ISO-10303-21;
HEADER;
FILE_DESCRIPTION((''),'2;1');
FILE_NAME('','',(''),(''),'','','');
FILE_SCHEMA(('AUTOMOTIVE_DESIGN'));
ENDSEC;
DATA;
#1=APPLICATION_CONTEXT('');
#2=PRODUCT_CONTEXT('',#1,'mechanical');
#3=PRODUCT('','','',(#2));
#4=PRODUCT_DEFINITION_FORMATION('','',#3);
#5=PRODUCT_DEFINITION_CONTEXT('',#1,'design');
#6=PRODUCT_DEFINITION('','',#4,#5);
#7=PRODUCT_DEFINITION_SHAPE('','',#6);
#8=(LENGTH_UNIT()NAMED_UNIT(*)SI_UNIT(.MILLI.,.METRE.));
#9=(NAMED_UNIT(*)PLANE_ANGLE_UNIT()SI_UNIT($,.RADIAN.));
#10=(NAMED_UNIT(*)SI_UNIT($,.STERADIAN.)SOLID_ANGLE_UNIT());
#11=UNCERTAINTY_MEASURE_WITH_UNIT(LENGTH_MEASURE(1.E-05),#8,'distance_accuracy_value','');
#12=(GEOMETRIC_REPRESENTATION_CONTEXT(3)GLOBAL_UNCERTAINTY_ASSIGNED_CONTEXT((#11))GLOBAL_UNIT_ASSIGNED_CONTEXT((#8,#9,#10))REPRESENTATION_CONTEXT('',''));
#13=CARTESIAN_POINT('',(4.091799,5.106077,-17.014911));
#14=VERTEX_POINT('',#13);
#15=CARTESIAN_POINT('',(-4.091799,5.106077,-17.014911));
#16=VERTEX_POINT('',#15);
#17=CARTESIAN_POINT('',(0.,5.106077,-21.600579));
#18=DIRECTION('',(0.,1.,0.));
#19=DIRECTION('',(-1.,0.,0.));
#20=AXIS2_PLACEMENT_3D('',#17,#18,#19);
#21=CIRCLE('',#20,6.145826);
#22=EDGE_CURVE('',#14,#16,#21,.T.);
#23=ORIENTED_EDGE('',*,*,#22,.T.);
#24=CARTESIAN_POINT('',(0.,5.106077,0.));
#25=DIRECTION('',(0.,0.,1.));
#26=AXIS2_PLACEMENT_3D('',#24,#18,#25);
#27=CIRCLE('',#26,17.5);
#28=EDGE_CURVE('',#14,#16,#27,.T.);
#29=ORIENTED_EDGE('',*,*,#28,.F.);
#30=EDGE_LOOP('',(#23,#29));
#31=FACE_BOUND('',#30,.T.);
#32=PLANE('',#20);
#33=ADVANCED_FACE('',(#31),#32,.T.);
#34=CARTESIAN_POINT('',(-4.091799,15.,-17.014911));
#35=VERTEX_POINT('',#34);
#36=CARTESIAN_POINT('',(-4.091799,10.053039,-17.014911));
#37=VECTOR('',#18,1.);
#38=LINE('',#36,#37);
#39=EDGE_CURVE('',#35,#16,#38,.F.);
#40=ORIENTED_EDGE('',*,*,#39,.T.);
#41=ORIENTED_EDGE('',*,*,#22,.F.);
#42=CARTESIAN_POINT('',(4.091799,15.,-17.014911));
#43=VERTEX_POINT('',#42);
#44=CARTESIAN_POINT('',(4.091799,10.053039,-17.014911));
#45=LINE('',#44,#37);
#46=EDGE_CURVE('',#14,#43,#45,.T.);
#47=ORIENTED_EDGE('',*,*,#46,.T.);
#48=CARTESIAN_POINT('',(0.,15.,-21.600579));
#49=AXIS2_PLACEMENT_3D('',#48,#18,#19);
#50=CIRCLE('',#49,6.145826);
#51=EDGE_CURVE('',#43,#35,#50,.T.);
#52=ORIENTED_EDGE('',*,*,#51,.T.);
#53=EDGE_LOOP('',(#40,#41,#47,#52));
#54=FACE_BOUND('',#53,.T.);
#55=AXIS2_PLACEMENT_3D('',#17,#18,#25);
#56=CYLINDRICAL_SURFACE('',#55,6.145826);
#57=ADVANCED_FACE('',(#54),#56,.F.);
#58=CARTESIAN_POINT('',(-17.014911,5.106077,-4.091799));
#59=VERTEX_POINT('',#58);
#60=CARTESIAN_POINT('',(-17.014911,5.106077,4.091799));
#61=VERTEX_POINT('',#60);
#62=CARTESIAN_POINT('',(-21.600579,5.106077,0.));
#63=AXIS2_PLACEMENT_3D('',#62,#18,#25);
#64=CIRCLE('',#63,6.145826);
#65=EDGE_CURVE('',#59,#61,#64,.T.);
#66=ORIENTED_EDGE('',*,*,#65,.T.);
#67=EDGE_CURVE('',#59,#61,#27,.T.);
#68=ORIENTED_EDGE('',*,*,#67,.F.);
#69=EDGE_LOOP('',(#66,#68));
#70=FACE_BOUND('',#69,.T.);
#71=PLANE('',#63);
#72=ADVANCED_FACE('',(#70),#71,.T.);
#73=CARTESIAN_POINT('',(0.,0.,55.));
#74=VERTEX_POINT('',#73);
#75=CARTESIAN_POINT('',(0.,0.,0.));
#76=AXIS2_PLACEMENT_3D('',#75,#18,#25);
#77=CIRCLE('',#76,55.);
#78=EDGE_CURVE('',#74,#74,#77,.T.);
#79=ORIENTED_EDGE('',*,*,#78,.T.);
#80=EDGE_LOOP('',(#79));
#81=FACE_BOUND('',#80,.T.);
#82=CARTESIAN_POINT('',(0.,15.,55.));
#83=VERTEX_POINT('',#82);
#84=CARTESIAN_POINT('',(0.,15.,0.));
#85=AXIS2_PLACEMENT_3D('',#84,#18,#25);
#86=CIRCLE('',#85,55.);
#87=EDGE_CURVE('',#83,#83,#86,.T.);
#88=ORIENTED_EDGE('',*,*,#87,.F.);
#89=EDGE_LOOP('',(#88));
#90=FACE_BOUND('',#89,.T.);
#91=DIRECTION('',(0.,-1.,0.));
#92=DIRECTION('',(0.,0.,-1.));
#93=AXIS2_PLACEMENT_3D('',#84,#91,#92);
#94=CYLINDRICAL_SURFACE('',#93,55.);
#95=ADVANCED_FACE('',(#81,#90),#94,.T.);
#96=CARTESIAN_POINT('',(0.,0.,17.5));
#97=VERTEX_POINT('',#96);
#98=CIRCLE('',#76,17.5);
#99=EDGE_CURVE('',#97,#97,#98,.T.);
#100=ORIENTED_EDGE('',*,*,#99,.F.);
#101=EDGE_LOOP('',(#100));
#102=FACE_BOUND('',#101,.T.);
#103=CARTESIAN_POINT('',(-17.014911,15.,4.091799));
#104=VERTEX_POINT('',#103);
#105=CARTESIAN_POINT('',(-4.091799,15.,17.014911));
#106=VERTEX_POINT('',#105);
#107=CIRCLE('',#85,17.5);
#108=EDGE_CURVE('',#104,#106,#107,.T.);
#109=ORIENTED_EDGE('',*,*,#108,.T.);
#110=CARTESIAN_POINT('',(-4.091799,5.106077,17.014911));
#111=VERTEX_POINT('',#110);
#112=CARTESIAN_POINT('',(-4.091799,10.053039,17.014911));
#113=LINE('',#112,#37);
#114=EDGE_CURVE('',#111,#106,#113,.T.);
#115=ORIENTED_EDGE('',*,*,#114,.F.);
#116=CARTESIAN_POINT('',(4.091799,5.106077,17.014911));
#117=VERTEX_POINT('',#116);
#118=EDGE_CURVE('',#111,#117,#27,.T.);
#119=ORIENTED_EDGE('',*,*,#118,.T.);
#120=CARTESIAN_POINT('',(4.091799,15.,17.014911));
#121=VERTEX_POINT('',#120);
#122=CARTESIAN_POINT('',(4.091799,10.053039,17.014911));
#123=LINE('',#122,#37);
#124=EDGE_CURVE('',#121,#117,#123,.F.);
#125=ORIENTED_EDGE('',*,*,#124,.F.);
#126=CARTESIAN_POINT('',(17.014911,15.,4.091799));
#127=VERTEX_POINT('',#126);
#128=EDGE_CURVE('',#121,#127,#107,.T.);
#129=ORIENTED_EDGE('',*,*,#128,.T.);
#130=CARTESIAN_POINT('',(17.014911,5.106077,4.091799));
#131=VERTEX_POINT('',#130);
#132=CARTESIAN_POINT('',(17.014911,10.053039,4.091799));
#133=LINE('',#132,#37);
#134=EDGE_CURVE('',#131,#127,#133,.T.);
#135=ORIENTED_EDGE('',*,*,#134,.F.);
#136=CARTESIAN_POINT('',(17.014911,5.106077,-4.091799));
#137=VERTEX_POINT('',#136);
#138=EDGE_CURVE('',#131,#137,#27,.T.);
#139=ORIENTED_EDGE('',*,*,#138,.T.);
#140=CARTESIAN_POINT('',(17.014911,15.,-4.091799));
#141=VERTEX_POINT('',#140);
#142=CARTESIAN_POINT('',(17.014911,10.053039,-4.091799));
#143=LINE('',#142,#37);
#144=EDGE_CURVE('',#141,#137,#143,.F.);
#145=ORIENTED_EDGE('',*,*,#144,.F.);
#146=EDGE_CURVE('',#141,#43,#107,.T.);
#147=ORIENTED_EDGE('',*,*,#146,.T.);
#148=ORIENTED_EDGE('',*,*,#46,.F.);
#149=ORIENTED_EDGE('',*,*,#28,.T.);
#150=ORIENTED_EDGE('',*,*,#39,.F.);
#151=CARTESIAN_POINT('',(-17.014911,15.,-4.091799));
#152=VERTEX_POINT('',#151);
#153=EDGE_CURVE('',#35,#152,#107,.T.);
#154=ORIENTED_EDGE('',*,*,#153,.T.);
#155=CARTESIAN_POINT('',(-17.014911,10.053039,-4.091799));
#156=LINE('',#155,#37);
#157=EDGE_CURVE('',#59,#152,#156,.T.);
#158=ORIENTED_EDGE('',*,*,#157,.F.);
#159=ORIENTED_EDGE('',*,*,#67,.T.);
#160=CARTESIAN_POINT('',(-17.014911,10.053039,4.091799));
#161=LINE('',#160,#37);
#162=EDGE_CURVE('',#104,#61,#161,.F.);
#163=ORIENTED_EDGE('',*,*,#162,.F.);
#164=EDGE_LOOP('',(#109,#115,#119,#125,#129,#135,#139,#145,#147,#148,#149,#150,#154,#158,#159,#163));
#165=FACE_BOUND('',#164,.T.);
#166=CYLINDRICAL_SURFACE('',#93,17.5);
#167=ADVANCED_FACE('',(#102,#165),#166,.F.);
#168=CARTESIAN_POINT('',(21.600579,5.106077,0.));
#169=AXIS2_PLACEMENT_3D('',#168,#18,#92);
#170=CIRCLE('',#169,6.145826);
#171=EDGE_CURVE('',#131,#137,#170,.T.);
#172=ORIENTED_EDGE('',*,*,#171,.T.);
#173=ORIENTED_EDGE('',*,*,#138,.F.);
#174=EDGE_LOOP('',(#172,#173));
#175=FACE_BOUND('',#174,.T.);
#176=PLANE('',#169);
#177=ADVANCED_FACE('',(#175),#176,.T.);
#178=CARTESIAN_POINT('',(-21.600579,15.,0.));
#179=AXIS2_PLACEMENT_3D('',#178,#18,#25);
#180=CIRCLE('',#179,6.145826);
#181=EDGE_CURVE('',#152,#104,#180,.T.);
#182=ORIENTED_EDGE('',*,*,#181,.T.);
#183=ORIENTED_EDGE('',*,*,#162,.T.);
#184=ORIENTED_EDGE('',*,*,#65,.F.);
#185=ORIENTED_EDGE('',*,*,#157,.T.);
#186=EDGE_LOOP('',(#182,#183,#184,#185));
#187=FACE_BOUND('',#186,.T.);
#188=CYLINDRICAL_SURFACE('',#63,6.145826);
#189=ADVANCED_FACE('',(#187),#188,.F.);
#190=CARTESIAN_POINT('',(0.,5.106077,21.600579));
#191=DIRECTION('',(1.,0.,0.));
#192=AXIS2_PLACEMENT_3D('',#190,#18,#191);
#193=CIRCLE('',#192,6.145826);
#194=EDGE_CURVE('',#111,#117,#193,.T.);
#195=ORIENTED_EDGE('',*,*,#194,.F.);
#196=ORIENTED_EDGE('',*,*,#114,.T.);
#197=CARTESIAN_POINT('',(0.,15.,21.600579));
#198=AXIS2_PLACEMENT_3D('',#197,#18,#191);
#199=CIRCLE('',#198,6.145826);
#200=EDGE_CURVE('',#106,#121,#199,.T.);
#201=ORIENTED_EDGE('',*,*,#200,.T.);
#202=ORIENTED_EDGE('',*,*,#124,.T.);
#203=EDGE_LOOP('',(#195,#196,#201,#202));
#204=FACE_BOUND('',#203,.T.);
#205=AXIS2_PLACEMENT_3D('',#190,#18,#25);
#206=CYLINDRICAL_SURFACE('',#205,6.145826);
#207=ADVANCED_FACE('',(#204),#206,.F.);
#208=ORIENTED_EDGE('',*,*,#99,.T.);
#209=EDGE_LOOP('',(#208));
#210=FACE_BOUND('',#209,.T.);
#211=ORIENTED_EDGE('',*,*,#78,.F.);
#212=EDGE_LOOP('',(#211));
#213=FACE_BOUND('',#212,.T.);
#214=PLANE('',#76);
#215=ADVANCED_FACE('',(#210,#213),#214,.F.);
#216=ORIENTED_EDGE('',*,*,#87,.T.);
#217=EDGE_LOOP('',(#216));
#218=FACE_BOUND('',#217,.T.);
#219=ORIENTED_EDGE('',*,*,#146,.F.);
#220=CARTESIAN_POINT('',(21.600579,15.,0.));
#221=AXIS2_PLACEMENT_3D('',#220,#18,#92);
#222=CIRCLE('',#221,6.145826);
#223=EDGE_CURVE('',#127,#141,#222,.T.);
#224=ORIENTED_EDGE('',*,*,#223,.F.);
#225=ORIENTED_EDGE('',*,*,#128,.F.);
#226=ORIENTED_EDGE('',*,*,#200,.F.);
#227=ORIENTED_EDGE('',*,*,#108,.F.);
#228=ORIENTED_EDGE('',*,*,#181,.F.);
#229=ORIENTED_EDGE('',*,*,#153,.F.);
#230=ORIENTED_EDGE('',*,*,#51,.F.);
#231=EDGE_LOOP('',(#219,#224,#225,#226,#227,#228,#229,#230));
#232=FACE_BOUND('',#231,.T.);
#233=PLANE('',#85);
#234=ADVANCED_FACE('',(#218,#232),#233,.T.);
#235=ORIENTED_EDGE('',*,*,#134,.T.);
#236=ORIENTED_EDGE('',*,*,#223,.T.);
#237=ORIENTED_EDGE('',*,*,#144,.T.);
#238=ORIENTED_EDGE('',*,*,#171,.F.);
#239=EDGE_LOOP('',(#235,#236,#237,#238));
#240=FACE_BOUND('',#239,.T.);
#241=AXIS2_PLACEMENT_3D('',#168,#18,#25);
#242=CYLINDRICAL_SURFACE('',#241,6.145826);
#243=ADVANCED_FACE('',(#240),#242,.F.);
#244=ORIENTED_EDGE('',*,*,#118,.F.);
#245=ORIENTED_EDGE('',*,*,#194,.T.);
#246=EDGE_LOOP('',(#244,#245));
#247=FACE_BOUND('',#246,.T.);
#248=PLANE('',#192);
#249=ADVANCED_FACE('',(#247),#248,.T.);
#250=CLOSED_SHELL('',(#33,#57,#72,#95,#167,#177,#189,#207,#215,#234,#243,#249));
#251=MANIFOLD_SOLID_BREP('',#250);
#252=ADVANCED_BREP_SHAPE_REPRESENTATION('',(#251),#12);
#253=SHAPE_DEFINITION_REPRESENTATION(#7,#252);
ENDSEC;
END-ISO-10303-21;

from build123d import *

# Parameters (mm, degrees)
SKETCH1_R           = 55
BOSS_EXTRUDE1_DEPTH = 15
SKETCH2_R           = 17.5
CUT_EXTRUDE1_DEPTH  = 80.214897589
SKETCH3_R           = 6.14582619
CUT_EXTRUDE2_DEPTH  = 9.893922801
CIRPATTERN1_COUNT   = 4


with BuildPart() as part:
    # Sketch1 → Boss-Extrude1 (new body)
    with BuildSketch(Plane(origin=(0, 0, 0), x_dir=(1, 0, 0), z_dir=(0, 1, 0))):
        Circle(SKETCH1_R)
    extrude(amount=BOSS_EXTRUDE1_DEPTH)

    # Sketch2 → Cut-Extrude1 (cut, through all)
    with BuildSketch(Plane(origin=(0, 0, 0), x_dir=(1, 0, 0), z_dir=(0, 1, 0))):
        Circle(SKETCH2_R)
    extrude(amount=CUT_EXTRUDE1_DEPTH, mode=Mode.SUBTRACT)

    # Sketch3 → Cut-Extrude2 (cut)
    with BuildSketch(Plane(origin=(0, 15, 0), x_dir=(1, 0, 0), z_dir=(0, 1, 0))):
        with Locations((-21.600579373, 0)):
            Circle(SKETCH3_R)
    cut_extrude2 = extrude(amount=-CUT_EXTRUDE2_DEPTH, mode=Mode.SUBTRACT)

    # CirPattern1: Cut-Extrude2 ×4 about axis
    cirpattern1_axis = Axis((0, 0, 0), (0, 1, 0))
    for i in range(1, CIRPATTERN1_COUNT):
        add(cut_extrude2.rotate(cirpattern1_axis, i * 360 / CIRPATTERN1_COUNT), mode=Mode.SUBTRACT)


solid = part.part
